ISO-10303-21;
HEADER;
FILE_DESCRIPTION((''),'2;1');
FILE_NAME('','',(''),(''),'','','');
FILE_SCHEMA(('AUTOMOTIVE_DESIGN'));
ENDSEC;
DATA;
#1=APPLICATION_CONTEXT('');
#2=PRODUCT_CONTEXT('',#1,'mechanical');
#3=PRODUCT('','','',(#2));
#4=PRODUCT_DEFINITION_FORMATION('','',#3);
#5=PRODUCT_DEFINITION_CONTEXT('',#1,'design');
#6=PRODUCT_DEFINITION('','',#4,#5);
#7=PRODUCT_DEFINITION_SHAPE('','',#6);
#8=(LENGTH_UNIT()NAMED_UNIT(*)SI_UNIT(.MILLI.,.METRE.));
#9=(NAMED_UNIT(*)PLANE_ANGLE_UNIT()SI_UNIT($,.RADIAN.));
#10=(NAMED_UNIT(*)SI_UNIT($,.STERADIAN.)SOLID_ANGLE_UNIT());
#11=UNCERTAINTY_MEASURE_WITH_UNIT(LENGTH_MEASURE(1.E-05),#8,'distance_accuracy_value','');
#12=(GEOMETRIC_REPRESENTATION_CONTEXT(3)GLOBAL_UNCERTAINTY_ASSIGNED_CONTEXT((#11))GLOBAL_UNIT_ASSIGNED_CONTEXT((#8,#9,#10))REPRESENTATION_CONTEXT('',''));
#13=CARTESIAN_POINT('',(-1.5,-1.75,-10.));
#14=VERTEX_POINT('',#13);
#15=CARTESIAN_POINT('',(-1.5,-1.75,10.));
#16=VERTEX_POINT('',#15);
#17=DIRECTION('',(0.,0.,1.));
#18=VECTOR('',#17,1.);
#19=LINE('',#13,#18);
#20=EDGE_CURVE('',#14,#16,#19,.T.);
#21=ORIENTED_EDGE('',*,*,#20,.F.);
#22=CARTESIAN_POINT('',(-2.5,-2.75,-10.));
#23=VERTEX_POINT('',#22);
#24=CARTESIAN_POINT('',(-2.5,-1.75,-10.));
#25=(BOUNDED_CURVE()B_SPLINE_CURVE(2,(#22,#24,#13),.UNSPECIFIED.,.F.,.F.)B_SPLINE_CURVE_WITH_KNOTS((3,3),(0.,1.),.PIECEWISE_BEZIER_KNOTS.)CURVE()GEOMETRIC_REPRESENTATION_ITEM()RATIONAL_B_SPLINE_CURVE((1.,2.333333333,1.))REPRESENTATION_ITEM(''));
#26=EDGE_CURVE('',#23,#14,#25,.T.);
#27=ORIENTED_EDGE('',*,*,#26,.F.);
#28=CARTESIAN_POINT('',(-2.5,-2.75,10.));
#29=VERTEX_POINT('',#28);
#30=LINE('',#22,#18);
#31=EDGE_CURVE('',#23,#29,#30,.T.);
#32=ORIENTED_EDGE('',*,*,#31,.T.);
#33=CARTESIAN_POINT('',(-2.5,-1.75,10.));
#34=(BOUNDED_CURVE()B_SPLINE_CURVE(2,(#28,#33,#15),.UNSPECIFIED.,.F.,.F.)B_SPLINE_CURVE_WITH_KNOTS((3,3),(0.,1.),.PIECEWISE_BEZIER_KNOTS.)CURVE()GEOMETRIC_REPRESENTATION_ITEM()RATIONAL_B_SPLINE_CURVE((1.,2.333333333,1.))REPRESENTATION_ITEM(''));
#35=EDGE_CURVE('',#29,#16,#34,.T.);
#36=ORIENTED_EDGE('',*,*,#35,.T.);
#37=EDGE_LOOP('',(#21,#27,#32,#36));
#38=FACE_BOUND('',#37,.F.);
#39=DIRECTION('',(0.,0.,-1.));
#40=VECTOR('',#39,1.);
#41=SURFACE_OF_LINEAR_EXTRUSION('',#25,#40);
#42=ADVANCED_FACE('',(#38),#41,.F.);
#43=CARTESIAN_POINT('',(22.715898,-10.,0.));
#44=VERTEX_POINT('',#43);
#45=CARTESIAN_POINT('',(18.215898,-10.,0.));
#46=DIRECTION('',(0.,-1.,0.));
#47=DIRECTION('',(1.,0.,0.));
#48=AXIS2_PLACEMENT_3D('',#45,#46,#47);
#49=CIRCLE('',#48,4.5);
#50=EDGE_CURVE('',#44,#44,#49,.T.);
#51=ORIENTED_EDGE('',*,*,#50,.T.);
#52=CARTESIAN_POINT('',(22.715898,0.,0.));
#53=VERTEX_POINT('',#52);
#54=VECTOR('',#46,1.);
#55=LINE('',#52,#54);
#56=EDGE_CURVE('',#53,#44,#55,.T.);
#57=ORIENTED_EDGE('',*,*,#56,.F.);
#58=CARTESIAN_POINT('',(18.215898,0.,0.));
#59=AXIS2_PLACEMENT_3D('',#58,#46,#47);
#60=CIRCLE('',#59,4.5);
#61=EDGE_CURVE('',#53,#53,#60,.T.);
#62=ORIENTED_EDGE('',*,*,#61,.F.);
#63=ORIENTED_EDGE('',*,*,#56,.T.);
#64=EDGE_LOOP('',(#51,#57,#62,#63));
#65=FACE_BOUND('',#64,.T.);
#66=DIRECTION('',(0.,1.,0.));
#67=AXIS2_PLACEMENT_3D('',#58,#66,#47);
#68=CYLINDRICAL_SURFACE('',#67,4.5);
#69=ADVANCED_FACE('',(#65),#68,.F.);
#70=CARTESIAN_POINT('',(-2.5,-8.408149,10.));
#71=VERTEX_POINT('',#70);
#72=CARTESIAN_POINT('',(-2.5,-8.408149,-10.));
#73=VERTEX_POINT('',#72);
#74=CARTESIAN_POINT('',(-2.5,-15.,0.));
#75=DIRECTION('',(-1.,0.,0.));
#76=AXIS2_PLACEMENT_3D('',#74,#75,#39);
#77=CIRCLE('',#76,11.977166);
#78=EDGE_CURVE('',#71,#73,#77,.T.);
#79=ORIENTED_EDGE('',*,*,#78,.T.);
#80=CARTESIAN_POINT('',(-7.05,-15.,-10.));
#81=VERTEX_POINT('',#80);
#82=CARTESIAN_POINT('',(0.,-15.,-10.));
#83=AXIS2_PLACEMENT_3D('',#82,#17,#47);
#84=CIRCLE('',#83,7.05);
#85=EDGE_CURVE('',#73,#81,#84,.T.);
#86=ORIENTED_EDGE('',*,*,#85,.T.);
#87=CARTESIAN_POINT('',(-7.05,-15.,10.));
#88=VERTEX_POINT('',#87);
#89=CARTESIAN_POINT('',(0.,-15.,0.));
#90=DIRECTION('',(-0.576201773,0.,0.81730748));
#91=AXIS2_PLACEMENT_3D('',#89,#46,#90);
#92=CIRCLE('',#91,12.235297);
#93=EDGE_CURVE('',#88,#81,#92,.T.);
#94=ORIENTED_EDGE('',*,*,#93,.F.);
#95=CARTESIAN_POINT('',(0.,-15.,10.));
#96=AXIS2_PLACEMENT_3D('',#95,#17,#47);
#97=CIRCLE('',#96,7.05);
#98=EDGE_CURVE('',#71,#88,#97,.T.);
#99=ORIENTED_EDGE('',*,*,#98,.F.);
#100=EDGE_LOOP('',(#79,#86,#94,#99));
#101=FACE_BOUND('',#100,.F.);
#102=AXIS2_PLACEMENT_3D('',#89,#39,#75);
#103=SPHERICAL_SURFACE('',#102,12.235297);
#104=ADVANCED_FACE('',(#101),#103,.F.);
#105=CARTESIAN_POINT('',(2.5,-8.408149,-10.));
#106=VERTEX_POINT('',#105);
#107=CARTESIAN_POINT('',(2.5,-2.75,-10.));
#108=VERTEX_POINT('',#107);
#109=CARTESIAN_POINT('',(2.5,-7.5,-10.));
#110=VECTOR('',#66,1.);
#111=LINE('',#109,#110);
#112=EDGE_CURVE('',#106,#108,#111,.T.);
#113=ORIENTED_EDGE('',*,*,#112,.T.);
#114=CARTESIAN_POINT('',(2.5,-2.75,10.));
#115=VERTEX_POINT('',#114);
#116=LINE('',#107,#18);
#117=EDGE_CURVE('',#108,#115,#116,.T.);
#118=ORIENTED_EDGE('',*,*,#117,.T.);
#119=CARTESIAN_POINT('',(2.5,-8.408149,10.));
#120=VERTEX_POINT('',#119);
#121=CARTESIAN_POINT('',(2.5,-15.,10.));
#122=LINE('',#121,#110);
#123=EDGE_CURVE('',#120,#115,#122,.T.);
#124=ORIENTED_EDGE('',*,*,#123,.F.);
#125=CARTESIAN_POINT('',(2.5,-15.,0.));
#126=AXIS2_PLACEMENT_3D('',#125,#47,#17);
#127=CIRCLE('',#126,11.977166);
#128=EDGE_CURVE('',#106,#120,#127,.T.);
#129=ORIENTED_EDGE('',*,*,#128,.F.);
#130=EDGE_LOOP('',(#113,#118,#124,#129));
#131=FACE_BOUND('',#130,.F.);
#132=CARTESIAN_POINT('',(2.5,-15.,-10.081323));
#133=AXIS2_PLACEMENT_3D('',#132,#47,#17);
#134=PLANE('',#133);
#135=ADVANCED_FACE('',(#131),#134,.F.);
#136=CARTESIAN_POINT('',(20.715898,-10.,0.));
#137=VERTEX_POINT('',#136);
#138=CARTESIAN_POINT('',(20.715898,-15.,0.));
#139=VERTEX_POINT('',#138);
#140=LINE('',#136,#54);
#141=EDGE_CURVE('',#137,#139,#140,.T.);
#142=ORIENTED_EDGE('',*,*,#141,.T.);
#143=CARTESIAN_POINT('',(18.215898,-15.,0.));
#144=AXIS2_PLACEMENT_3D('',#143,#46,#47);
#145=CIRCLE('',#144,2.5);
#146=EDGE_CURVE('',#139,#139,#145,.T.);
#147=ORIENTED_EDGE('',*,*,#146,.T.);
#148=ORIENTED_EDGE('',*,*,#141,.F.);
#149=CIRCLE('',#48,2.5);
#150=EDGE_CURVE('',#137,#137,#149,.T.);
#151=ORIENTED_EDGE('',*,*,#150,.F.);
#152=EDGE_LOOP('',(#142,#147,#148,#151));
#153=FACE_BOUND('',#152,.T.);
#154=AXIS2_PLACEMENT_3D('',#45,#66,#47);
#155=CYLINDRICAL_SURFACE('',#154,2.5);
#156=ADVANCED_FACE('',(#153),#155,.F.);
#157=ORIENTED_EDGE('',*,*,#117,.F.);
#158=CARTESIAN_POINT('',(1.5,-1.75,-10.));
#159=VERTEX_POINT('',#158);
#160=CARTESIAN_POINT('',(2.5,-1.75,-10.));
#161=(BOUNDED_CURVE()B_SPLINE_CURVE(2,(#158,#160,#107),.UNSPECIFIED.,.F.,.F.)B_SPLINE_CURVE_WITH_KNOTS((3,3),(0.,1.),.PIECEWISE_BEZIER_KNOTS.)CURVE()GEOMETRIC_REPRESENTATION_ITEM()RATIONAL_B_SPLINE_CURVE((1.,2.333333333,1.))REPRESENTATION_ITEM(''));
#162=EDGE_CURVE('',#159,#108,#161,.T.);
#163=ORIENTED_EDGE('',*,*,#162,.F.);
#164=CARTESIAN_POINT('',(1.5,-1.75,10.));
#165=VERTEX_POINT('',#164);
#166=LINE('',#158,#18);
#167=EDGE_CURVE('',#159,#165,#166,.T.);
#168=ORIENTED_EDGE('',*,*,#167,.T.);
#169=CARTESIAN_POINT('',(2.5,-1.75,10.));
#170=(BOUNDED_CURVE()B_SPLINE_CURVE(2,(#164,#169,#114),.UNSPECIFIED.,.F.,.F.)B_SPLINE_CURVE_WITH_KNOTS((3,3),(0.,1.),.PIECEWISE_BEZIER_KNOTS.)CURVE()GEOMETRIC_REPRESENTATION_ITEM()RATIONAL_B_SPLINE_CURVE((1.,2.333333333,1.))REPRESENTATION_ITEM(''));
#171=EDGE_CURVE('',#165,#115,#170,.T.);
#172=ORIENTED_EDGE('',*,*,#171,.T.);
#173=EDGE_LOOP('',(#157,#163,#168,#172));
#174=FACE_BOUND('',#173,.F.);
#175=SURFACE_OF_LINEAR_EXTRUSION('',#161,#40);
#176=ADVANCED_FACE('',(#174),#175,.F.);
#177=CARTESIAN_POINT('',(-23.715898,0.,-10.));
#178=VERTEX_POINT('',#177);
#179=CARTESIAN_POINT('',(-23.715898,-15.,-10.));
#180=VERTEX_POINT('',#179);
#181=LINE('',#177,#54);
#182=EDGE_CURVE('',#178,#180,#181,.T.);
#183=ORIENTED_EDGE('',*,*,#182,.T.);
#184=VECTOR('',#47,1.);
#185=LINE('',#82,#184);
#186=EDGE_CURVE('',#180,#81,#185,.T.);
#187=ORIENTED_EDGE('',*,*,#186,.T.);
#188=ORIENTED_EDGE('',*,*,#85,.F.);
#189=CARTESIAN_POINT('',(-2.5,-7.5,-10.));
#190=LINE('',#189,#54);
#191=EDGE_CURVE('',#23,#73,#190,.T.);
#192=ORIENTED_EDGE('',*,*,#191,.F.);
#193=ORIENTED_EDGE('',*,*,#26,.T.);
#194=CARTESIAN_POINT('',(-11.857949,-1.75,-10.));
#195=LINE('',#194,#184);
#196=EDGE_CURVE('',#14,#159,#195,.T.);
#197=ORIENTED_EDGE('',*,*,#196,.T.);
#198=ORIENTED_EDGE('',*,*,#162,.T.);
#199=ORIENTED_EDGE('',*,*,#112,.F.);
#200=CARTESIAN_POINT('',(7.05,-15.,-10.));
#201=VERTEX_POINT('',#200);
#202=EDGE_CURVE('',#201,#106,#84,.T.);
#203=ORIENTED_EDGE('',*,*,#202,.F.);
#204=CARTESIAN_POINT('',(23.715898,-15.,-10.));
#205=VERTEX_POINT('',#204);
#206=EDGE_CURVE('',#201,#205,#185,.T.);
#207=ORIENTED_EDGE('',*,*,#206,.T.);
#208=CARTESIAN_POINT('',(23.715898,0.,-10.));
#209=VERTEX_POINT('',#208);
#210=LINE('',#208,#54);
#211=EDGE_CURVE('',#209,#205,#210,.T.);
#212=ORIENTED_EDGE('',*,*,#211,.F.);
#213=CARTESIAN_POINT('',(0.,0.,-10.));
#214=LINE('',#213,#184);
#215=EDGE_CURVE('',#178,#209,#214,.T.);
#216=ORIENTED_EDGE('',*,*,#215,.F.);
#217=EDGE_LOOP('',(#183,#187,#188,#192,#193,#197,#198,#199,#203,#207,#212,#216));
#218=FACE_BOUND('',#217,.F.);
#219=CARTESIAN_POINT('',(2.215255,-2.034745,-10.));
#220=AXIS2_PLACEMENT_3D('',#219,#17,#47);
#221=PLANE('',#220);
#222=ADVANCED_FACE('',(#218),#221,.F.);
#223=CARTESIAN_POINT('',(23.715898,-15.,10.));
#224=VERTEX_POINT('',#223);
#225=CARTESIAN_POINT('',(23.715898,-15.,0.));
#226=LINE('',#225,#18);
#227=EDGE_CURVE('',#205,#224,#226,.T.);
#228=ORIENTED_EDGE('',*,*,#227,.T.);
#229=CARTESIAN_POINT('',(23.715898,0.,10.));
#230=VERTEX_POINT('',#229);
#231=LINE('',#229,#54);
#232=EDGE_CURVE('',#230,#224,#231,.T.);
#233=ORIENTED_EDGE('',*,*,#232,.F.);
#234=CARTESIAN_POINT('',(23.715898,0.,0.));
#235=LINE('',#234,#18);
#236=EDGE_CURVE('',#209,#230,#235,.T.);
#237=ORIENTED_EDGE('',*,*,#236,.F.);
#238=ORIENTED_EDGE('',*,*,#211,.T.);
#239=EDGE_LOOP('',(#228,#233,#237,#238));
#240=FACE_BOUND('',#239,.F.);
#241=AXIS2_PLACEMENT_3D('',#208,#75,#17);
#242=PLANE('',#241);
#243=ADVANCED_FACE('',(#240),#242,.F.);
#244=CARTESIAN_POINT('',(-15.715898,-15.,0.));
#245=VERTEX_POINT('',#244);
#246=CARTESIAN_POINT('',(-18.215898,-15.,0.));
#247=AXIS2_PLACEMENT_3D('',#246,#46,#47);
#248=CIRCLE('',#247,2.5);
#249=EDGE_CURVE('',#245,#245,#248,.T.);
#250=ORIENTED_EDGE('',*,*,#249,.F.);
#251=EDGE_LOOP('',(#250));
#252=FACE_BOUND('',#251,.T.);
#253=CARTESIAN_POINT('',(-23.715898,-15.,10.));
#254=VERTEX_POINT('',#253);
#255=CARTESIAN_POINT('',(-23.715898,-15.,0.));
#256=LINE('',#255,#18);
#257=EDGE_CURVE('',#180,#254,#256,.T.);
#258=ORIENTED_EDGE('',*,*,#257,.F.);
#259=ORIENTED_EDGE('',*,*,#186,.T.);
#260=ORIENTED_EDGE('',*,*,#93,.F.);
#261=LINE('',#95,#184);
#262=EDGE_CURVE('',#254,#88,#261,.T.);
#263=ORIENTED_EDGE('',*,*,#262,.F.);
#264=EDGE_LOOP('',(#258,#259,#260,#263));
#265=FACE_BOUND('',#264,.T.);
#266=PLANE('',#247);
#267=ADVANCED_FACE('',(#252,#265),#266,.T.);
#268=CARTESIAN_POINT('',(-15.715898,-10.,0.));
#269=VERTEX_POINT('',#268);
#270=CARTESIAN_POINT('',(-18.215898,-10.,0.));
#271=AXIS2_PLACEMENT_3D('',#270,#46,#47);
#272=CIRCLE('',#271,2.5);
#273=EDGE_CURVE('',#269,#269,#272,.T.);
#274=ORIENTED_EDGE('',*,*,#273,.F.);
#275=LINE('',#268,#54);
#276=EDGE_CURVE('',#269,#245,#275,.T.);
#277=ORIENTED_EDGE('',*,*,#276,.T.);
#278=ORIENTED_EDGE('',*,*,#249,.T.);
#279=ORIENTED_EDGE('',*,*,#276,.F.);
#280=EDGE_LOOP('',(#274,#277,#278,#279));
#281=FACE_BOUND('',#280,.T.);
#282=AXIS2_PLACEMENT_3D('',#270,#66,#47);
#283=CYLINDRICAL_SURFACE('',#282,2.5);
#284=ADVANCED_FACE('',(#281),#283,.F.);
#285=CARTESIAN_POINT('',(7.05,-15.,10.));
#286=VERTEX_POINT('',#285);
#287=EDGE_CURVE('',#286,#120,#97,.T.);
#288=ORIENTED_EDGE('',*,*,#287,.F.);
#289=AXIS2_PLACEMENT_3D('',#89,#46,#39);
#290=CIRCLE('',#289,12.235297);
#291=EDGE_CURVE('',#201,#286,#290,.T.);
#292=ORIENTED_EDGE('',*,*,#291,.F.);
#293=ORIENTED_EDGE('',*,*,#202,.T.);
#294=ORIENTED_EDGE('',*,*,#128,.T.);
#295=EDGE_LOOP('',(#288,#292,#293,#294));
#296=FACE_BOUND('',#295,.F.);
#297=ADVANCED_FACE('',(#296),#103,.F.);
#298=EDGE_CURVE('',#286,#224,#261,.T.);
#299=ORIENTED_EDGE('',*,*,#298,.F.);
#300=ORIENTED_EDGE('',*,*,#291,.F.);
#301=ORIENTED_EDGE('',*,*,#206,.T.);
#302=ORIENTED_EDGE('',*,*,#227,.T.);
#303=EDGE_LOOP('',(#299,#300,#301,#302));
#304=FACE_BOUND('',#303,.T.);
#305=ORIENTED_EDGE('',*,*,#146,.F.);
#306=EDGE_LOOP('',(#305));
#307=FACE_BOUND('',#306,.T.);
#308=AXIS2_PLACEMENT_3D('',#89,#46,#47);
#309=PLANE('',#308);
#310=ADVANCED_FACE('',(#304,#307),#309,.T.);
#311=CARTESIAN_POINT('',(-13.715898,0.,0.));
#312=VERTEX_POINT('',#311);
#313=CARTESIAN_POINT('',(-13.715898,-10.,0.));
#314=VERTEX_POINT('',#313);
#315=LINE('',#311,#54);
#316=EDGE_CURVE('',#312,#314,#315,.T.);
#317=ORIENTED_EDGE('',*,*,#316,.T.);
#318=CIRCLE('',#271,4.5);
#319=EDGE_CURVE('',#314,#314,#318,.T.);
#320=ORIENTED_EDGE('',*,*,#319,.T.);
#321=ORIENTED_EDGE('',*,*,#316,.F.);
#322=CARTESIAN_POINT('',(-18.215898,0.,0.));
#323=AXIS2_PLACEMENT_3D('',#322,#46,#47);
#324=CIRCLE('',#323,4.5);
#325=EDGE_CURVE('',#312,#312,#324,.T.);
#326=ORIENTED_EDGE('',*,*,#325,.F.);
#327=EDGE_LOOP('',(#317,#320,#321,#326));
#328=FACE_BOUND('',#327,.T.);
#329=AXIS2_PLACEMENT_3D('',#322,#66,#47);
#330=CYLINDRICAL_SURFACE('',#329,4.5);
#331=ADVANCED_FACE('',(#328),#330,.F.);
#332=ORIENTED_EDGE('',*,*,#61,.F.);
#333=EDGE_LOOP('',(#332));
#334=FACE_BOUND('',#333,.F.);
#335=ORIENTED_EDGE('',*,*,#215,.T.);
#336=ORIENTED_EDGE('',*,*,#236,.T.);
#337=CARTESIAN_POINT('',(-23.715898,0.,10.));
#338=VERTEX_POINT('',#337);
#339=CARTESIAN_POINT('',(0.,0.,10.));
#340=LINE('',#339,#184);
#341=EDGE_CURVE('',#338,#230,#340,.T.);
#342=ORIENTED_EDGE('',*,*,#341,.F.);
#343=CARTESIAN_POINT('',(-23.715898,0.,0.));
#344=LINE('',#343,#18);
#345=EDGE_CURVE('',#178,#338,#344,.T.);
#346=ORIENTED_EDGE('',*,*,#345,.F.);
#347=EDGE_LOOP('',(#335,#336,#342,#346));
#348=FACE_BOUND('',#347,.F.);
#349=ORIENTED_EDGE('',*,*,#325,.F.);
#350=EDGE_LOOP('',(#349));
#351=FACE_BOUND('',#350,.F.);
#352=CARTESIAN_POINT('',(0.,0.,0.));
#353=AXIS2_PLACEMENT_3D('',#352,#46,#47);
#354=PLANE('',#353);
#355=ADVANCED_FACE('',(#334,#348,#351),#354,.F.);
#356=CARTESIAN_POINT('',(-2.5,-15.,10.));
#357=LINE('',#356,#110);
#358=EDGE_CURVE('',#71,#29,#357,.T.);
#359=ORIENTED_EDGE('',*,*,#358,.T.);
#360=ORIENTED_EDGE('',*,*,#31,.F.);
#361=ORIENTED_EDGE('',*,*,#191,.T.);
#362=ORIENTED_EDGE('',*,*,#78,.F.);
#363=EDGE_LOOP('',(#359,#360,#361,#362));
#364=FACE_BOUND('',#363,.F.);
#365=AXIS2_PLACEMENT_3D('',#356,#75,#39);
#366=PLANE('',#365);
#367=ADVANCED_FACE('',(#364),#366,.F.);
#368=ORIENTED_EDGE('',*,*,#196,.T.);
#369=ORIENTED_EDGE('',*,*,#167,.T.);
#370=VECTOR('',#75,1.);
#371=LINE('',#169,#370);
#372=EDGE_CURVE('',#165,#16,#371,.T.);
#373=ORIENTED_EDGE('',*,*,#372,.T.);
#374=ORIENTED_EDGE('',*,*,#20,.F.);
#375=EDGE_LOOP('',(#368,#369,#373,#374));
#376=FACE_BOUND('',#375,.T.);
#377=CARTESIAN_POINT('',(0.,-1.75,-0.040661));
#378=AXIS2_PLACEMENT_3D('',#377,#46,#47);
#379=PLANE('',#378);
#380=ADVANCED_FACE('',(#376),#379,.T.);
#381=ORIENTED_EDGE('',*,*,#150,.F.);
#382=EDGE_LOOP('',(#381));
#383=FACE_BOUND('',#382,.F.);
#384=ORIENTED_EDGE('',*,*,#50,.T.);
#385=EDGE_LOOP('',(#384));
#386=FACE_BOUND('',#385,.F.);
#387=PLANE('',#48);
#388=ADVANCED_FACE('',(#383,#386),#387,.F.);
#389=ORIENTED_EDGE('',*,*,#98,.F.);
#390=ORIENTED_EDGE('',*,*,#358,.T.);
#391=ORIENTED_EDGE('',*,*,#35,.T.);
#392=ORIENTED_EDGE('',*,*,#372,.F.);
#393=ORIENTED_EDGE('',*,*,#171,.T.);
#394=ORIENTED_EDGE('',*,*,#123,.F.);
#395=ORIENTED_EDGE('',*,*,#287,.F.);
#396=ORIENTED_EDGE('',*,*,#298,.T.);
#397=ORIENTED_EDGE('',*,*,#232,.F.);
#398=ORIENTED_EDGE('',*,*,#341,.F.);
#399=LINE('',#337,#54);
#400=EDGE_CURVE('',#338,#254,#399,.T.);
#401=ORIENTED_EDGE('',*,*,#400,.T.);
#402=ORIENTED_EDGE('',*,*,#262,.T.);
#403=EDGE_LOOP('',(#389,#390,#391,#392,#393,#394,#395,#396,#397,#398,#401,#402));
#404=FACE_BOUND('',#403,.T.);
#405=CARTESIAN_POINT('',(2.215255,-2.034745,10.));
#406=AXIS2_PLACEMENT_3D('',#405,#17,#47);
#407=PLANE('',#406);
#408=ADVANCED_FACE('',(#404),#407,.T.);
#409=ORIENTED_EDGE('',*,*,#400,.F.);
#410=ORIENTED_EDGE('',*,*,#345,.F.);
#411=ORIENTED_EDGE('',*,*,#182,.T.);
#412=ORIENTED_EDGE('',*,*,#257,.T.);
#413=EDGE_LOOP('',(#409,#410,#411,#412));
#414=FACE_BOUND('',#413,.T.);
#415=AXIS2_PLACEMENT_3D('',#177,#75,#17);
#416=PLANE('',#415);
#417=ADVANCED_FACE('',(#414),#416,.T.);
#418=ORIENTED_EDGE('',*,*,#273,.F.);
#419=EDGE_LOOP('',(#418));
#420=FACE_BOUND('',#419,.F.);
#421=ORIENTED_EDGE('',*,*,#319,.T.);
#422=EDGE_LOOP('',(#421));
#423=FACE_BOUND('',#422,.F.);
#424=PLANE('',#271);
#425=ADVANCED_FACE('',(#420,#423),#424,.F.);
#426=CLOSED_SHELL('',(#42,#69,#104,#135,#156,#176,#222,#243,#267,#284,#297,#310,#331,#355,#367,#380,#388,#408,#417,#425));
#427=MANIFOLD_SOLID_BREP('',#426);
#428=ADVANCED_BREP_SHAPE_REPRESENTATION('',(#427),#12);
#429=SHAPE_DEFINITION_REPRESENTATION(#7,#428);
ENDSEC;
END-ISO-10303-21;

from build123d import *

# Parameters (mm, degrees)
F0_W        = 47.4317967892
F0_H        = 20
F0_R        = 4.5
F1_DEPTH    = 15
F2_R        = 7.05
F3_DEPTH    = 25
F7_DEPTH    = 13.25
F8_T1_DEPTH = 20
F9_START    = 10
F0_R_2      = 2.5
F9_DEPTH    = 5


# Not quite as in the source:
# - a fillet or chamfer that OpenCascade refuses, or shapes differently, is made with other operations: its cross-section is extruded or revolved along the edge and cut away or added


with BuildPart() as f1:
    # F0 (on Front) → F1 (new body)
    with BuildSketch(Plane.XZ):
        Rectangle(F0_W, F0_H)
        with Locations((-18.2158983946, 0)):
            Circle(F0_R, mode=Mode.SUBTRACT)
        with Locations((18.2158983946, 0)):
            Circle(F0_R, mode=Mode.SUBTRACT)
    extrude(amount=F1_DEPTH)

    # F2 (on face) → F3 (cut)
    with BuildSketch(Plane.XY.offset(10)):
        with Locations((0, -15)):
            Circle(F2_R)
    extrude(amount=-F3_DEPTH, mode=Mode.SUBTRACT)

    # F4 (on face) → F5 (revolve, cut)
    with BuildSketch(Plane.XZ.offset(15)):
        with BuildLine():
            Line((-7.05, -10), (-7.05, 10))
            ThreePointArc((-7.05, 10), (-12.2352972992, 0), (-7.05, -10))
        make_face()
    revolve(axis=Axis((0, -15, 0.0368109904), (0, 0, -1)), mode=Mode.SUBTRACT)

    # F6 (on face) → F7 (cut)
    with BuildSketch(Plane.XZ.offset(15)):
        Polygon((2.5, -10.0813228637), (2.5, 10), (0, 10), (-2.5, 10), (-2.5, -10.0813228637), (0, -10.0813228637), align=None)
    extrude(amount=-F7_DEPTH, mode=Mode.SUBTRACT)

    # F8: fillet of radius 1 on 2 edges, made by hand

    # F8_s2 → F8_t1 (join)
    with BuildSketch(Plane.XY.offset(-10)):
        with BuildLine():
            add(Edge.make_bspline(
                [(1.5, -1.75), (2.5, -1.75), (2.5, -2.75)],
                knots=[0, 0, 0, 1, 1, 1], degree=2, weights=[1, 2.3333333333, 1]))
            Line((2.5, -2.75), (2.5, -1.75))
            Line((2.5, -1.75), (1.5, -1.75))
        make_face()
        with BuildLine():
            add(Edge.make_bspline(
                [(-2.5, -2.75), (-2.5, -1.75), (-1.5, -1.75)],
                knots=[0, 0, 0, 1, 1, 1], degree=2, weights=[1, 2.3333333333, 1]))
            Line((-1.5, -1.75), (-2.5, -1.75))
            Line((-2.5, -1.75), (-2.5, -2.75))
        make_face()
    extrude(amount=F8_T1_DEPTH)

    # F0 (on Front) → F9 (join)
    with BuildSketch(Plane.XZ.offset(F9_START)):
        with Locations((-18.2158983946, 0)):
            Circle(F0_R)
        with Locations((-18.2158983946, 0)):
            Circle(F0_R_2, mode=Mode.SUBTRACT)
        with Locations((18.2158983946, 0)):
            Circle(F0_R)
        with Locations((18.2158983946, 0)):
            Circle(F0_R_2, mode=Mode.SUBTRACT)
    extrude(amount=F9_DEPTH)


solid = f1.part
